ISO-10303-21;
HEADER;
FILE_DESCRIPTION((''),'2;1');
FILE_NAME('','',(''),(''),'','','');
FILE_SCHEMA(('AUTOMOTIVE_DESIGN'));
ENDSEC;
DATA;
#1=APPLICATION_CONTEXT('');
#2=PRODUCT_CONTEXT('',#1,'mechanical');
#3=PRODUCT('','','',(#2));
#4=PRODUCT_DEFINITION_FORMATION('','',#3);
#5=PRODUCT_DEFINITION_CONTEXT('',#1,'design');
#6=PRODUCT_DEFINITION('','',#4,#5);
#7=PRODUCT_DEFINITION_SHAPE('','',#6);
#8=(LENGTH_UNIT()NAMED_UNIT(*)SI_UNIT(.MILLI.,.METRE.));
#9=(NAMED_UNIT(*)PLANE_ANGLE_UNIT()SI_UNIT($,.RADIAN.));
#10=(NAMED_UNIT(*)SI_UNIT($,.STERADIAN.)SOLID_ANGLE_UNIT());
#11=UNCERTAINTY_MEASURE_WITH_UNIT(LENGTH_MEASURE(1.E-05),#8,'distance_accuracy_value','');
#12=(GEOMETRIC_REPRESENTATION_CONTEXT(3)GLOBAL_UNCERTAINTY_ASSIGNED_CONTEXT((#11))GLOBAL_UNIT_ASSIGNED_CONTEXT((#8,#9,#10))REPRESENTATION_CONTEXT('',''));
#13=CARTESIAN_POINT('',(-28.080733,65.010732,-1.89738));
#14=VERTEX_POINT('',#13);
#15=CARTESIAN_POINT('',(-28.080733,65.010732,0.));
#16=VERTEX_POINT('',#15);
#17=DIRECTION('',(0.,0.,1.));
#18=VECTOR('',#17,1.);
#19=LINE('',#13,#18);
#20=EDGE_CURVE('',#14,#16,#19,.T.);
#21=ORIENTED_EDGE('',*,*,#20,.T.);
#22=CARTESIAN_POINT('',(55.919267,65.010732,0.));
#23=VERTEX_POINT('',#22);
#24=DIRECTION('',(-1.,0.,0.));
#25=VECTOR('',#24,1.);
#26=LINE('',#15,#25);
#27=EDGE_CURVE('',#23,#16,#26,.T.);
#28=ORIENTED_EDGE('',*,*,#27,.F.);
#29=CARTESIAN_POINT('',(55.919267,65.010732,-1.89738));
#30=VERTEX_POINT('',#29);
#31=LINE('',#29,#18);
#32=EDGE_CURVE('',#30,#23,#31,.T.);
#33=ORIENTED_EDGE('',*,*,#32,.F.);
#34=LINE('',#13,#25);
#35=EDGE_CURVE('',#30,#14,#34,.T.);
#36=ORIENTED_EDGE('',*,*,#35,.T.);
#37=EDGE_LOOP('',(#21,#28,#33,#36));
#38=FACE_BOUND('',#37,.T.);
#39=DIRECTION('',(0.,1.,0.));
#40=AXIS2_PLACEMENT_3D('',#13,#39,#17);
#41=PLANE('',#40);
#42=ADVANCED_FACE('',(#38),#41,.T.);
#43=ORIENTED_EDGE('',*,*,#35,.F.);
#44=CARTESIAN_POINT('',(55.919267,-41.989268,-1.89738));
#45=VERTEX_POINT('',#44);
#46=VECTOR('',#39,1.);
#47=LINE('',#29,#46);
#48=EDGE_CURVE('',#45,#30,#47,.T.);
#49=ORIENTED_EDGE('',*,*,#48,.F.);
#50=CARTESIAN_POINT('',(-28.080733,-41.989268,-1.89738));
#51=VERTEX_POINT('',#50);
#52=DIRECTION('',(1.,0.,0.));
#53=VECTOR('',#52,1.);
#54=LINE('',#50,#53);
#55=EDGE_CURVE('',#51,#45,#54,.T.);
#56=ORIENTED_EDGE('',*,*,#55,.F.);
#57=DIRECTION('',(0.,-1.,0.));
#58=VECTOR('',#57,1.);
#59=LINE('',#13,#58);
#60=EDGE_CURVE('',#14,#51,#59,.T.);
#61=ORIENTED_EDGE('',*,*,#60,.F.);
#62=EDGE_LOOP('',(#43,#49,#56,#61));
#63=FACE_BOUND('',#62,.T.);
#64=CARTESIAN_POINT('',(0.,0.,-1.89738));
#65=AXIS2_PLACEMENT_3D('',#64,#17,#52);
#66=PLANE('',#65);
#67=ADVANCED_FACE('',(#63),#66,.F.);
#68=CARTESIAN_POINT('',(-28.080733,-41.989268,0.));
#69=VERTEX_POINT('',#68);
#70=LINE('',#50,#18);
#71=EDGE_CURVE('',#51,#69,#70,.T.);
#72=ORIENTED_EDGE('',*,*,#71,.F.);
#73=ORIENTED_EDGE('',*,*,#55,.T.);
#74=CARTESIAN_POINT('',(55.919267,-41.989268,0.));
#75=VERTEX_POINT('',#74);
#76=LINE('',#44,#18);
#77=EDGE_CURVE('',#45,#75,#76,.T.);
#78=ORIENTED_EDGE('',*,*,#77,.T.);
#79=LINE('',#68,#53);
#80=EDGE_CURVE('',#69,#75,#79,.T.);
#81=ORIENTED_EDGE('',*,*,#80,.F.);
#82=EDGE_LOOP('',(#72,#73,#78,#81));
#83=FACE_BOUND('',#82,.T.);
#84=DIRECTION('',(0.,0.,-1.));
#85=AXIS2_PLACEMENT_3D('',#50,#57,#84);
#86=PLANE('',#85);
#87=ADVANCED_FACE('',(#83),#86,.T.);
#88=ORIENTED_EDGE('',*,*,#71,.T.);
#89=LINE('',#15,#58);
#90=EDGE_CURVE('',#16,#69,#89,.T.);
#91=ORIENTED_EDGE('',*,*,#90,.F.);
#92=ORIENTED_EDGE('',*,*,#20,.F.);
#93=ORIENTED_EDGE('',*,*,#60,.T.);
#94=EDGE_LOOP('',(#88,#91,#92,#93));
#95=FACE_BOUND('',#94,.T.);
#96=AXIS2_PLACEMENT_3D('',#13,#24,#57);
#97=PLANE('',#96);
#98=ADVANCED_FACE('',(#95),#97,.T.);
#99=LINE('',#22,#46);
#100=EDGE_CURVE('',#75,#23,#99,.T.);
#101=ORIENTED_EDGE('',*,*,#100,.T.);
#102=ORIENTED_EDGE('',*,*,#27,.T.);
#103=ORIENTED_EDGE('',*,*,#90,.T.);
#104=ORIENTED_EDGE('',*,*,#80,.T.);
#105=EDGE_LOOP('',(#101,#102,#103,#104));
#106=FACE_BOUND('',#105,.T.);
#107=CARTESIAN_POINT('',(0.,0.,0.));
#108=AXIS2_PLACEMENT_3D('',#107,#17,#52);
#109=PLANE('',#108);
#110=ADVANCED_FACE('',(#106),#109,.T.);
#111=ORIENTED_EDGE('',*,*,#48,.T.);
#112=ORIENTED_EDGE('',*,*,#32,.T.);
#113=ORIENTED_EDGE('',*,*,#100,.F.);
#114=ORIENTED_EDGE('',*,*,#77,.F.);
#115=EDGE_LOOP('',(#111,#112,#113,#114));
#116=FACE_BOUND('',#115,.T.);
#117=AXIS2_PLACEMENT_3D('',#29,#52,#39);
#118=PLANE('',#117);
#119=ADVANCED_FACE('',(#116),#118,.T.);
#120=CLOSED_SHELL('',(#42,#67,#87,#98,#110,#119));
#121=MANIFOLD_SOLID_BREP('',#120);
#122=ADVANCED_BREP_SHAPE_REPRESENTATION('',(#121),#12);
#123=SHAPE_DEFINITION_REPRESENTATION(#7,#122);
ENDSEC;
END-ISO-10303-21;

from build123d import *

# Parameters (mm, degrees)
SKETCH1_W          = 84
SKETCH1_H          = 107
BASE_FLANGE1_DEPTH = 1.89738


# Sheet-metal steps are written as plain solids
with BuildPart() as part:
    # Sketch1 → Base-Flange1 (new body)
    with BuildSketch(Plane.XY):
        with Locations((13.9192673, 11.510731857)):
            Rectangle(SKETCH1_W, SKETCH1_H)
    extrude(amount=-BASE_FLANGE1_DEPTH)


solid = part.part
